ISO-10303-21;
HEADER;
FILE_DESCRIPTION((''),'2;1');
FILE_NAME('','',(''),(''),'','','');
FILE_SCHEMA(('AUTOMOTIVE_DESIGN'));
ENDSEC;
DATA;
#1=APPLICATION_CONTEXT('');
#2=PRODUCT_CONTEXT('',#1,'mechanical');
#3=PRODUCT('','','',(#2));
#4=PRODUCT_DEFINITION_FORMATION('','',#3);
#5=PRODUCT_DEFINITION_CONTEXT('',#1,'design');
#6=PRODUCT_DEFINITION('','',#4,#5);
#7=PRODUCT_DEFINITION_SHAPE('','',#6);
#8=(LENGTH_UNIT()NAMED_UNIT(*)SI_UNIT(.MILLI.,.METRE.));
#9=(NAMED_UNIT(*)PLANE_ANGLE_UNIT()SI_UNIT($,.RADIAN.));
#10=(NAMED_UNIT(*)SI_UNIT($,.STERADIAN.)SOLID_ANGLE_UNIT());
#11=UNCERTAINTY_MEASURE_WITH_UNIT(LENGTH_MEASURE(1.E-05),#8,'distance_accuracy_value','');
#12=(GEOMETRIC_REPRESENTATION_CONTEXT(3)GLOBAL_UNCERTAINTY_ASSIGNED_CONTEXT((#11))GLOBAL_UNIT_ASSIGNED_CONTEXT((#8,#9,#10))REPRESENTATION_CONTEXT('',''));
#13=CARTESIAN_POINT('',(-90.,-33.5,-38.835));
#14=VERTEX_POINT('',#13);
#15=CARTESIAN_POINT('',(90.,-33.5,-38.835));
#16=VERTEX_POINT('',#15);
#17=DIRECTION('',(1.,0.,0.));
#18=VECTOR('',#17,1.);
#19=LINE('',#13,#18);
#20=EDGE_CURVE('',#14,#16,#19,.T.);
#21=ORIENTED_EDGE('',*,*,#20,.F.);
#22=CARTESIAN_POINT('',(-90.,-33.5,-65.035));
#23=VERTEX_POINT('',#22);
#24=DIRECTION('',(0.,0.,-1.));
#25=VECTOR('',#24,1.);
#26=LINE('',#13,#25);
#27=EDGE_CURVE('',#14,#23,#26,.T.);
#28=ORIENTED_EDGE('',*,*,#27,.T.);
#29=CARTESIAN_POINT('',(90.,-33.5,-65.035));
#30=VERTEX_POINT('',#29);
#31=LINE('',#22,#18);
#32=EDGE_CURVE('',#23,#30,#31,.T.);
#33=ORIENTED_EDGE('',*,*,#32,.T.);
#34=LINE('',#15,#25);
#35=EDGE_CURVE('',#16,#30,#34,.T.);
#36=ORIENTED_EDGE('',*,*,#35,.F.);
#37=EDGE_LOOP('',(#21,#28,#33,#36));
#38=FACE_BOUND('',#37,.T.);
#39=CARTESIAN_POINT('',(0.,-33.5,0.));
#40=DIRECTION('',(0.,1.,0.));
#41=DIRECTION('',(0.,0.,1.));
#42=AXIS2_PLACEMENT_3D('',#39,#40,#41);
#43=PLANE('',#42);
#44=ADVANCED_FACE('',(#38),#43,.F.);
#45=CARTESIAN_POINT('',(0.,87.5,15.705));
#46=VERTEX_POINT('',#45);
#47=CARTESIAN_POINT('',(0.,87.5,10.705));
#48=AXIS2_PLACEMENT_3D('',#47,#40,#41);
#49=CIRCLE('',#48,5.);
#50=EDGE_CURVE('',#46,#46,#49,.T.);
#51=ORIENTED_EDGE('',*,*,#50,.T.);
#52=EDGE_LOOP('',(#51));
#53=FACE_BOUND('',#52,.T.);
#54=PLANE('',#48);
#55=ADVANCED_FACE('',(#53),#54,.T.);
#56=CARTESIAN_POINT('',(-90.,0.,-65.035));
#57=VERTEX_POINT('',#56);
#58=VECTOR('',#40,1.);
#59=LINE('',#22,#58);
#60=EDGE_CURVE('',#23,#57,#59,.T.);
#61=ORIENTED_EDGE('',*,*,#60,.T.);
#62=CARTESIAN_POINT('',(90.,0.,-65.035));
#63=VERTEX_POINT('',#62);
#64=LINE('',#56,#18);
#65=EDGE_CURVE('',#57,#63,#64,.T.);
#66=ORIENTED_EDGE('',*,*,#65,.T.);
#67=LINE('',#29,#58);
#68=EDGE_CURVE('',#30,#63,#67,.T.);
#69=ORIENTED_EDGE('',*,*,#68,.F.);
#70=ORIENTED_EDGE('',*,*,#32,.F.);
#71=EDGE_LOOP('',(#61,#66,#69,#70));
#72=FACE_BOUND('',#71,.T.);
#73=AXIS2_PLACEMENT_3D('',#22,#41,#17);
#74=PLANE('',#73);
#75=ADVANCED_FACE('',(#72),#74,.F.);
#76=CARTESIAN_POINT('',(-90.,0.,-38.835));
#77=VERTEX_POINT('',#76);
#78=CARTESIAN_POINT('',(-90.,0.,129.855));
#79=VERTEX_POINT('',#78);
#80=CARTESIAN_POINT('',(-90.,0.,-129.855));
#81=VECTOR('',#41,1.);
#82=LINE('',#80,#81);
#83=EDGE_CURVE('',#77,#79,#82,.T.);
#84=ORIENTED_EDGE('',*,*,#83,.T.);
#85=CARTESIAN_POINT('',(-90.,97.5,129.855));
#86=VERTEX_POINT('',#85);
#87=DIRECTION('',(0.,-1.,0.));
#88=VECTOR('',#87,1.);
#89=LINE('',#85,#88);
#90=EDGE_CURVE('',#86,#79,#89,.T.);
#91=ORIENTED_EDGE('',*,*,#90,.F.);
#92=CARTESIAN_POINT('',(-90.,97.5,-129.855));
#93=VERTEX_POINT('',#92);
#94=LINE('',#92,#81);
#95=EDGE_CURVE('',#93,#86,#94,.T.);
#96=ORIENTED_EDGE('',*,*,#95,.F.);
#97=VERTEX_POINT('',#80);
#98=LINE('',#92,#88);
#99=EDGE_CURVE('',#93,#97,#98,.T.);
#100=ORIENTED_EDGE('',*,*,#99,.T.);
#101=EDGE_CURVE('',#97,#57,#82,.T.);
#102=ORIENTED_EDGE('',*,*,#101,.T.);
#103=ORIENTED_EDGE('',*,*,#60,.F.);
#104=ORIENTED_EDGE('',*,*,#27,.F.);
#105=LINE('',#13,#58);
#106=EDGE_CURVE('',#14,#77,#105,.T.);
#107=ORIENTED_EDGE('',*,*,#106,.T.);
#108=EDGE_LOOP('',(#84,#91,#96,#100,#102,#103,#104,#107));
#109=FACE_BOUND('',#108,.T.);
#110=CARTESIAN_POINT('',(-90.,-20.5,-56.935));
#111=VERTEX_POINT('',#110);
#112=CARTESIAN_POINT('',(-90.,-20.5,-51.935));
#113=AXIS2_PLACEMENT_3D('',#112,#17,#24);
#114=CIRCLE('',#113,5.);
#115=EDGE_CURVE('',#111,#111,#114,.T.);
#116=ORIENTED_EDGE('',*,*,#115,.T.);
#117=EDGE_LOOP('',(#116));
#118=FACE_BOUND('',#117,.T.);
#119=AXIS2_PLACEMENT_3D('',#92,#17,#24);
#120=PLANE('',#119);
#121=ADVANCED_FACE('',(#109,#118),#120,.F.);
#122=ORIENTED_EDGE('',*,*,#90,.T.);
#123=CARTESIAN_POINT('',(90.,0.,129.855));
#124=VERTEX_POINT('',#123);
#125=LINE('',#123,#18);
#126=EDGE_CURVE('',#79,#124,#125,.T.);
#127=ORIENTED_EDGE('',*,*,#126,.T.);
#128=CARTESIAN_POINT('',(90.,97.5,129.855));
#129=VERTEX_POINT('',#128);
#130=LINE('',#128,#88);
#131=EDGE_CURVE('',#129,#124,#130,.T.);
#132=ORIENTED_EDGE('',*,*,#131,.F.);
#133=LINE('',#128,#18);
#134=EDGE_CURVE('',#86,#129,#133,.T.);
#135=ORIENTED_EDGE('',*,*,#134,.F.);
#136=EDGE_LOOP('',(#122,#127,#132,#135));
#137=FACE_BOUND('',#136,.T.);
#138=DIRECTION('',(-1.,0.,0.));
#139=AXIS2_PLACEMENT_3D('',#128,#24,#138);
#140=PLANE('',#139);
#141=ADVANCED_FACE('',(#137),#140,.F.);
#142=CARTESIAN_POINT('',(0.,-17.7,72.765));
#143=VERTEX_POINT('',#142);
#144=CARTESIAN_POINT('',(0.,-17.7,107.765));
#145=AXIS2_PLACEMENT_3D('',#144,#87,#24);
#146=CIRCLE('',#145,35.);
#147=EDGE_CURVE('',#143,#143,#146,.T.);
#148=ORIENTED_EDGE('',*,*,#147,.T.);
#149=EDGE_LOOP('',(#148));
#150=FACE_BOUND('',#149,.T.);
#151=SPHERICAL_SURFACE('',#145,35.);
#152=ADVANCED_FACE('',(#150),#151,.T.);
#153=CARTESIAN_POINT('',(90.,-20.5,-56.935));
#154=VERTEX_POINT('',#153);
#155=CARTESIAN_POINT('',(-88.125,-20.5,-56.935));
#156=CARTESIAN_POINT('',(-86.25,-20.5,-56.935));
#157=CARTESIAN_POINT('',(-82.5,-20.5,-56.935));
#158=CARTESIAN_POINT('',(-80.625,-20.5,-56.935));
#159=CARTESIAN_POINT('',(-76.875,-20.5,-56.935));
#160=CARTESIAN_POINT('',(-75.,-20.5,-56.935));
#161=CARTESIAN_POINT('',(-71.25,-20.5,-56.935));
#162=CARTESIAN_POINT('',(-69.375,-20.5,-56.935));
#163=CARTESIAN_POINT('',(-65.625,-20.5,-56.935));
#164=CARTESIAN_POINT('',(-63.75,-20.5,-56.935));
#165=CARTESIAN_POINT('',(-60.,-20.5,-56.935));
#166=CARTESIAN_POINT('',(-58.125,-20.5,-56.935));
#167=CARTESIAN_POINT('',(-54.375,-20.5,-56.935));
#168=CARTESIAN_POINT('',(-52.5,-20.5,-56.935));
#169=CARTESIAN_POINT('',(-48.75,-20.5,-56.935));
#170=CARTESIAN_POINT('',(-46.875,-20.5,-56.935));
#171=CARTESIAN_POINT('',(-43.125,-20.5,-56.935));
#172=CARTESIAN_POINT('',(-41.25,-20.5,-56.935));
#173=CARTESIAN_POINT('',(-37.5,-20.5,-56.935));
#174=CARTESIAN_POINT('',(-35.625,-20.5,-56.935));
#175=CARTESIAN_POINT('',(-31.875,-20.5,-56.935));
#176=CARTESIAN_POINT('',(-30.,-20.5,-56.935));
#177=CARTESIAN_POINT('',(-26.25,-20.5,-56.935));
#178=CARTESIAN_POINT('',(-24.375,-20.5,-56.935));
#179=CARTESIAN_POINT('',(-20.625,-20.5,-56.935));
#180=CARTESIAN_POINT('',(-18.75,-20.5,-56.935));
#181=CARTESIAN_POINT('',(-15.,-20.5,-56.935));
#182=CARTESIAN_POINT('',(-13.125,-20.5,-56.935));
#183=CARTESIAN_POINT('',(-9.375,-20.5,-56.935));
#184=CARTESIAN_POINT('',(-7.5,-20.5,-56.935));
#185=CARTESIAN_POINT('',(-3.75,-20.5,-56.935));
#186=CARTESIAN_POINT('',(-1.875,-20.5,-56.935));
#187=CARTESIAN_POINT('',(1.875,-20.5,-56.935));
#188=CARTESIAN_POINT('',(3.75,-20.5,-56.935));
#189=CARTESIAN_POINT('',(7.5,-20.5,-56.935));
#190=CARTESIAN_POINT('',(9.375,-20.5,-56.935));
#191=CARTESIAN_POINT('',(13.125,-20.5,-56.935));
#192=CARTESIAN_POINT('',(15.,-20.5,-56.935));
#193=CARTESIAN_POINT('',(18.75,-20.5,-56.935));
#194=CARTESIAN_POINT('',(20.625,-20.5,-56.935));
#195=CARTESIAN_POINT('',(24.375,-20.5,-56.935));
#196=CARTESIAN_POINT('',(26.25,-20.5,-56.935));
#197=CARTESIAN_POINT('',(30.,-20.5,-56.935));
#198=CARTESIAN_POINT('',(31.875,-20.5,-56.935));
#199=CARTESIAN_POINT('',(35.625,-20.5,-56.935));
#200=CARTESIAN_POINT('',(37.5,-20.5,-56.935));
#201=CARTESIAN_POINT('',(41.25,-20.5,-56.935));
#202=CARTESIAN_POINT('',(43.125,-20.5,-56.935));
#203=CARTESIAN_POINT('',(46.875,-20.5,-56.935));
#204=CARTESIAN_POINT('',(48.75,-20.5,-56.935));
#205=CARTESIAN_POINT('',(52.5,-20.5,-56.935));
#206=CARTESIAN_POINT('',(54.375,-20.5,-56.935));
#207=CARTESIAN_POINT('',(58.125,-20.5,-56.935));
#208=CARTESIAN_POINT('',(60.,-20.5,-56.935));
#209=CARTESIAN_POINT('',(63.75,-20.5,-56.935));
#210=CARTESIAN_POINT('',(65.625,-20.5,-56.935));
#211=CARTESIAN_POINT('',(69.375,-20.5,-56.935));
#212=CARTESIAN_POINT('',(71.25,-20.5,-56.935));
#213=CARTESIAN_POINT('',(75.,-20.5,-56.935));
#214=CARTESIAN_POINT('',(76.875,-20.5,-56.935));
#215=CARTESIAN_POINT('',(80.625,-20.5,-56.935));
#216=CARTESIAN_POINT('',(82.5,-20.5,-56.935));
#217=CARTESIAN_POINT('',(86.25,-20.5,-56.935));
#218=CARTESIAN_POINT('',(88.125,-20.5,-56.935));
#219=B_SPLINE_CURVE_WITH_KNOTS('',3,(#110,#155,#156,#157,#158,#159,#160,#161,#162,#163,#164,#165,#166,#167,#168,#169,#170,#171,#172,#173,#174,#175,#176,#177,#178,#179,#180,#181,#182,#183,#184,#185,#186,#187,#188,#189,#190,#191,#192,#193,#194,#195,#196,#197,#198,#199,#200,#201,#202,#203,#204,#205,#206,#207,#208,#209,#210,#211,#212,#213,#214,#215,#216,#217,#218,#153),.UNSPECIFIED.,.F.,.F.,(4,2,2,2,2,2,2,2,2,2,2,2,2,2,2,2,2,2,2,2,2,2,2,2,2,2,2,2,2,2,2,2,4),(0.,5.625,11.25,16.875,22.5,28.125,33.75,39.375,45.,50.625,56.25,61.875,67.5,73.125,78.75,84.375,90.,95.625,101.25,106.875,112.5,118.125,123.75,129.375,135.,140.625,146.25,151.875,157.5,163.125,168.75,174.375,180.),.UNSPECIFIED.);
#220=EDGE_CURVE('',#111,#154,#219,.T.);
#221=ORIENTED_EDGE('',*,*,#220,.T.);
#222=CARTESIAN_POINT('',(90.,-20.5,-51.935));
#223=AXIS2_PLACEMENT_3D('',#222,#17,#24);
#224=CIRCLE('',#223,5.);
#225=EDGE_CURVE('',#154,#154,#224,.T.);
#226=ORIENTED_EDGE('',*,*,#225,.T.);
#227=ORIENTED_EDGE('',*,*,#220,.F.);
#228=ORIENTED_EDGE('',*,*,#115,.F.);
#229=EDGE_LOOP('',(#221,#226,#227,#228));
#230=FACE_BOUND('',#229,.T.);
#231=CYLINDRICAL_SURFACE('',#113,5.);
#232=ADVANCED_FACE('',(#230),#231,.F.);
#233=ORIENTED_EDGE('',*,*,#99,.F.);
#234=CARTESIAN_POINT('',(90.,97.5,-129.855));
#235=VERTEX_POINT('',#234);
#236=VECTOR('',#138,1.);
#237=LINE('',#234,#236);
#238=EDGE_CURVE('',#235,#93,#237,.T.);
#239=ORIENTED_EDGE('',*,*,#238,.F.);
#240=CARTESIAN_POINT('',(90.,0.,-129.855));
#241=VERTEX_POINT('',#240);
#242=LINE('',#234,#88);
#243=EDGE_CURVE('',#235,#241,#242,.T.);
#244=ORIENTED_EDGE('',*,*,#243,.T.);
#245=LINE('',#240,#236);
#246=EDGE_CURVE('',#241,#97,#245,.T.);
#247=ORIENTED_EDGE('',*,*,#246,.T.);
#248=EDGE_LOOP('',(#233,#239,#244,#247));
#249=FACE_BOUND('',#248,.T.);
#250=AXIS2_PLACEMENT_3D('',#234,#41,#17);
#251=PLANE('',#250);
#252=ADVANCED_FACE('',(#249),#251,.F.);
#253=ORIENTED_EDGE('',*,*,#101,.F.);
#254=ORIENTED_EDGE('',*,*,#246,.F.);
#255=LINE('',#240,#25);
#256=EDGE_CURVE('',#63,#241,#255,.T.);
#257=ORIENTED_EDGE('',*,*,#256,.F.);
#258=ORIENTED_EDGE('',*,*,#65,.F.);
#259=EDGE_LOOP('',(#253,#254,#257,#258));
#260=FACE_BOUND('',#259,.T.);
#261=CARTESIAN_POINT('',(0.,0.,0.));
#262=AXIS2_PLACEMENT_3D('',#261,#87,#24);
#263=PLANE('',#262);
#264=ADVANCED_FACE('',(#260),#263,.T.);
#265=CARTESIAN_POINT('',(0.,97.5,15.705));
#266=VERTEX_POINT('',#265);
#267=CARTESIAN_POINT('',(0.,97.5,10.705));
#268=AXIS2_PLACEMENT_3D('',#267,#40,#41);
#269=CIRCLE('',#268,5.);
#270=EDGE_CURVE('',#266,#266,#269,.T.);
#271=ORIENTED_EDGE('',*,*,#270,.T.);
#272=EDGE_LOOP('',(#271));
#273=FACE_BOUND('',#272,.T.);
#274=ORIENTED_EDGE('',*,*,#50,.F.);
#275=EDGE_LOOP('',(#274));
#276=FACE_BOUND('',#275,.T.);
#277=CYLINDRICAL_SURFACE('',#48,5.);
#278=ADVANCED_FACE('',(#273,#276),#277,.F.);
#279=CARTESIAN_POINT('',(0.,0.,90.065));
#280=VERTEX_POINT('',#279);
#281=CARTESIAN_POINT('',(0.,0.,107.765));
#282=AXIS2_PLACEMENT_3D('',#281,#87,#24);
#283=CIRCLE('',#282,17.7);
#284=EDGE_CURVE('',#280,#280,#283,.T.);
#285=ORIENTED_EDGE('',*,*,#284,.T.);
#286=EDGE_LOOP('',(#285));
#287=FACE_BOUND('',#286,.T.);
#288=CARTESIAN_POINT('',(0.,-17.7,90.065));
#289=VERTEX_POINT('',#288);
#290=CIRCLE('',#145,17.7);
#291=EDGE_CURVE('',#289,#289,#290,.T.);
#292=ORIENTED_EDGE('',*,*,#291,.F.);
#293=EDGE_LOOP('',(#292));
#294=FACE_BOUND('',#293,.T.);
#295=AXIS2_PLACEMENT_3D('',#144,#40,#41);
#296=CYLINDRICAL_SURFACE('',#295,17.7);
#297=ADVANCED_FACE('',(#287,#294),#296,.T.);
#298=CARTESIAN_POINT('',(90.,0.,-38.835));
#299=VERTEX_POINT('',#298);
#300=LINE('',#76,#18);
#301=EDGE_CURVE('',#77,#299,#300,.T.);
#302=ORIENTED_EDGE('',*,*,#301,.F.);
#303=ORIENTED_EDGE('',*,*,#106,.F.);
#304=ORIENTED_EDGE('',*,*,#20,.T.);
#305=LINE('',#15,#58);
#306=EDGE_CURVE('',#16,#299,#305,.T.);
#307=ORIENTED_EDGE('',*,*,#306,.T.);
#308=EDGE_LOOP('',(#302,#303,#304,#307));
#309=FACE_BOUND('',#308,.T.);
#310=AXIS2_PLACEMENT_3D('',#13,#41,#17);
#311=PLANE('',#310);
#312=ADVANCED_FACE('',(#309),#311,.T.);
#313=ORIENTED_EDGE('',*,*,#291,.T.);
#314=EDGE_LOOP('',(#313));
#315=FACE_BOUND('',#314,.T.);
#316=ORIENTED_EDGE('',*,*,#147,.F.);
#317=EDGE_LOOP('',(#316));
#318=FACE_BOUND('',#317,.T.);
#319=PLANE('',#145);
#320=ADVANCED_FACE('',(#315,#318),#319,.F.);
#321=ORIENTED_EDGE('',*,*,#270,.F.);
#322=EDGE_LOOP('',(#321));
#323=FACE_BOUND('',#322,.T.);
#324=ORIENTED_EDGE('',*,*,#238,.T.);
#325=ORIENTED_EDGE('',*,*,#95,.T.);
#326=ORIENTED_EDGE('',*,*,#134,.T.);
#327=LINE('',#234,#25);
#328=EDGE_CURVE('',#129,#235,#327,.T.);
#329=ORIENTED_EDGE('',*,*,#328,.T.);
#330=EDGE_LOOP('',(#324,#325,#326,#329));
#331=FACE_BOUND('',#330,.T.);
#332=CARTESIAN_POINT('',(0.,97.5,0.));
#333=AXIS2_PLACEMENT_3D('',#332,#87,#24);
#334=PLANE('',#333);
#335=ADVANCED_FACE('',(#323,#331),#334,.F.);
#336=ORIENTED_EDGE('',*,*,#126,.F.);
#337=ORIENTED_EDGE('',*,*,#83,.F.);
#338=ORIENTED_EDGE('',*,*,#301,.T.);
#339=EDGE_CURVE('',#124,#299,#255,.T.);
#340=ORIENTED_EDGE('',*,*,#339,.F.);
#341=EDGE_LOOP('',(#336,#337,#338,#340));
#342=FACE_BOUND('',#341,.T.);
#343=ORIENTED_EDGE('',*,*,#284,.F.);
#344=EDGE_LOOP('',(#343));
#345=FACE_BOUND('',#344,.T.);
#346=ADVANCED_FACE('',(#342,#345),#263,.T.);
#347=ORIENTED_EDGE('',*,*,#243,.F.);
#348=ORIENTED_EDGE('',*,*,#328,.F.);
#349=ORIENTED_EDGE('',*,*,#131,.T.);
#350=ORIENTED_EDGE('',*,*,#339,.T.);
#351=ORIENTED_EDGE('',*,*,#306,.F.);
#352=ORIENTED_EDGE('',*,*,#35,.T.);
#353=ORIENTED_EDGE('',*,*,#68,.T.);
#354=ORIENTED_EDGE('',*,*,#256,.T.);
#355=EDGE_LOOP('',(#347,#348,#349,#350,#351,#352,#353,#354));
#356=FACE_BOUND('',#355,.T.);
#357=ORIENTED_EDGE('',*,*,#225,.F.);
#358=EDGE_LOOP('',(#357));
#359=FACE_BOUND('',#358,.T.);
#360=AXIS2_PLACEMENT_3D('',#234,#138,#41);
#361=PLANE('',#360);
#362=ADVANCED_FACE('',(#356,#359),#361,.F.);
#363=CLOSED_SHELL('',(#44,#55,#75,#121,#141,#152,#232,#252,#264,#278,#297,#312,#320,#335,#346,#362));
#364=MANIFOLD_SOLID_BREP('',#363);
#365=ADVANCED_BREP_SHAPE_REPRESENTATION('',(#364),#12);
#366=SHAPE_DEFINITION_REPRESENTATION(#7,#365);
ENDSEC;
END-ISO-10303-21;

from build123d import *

# Parameters (mm, degrees)
SKETCH2_W           = 180
SKETCH2_H           = 259.71
BOSS_EXTRUDE1_DEPTH = 97.5
SKETCH4_R           = 17.7
BOSS_EXTRUDE2_DEPTH = 17.7
SKETCH5_R           = 35
BOSS_EXTRUDE3_DEPTH = 35
FILLET2_R           = 35
SKETCH8_W           = 180
SKETCH8_H           = 26.2
BOSS_EXTRUDE4_DEPTH = 33.5
SKETCH9_R           = 5
CUT_EXTRUDE1_DEPTH  = 250.575830668
SKETCH10_R          = 5
CUT_EXTRUDE2_DEPTH  = 10


with BuildPart() as part:
    # Sketch2 → Boss-Extrude1 (new body)
    with BuildSketch(Plane(origin=(0, 0, 0), x_dir=(1, 0, 0), z_dir=(0, 1, 0))):
        Rectangle(SKETCH2_W, SKETCH2_H)
    extrude(amount=BOSS_EXTRUDE1_DEPTH)

    # Sketch4 → Boss-Extrude2 (add)
    with BuildSketch(Plane.XZ):
        with Locations(Location((0, 107.765, 0), (0, 0, 270))):
            Circle(SKETCH4_R)
    extrude(amount=BOSS_EXTRUDE2_DEPTH)

    # Sketch5 → Boss-Extrude3 (add)
    with BuildSketch(Plane.XZ.offset(17.7)):
        with Locations(Location((0, 107.765, 0), (0, 0, 270))):
            Circle(SKETCH5_R)
    extrude(amount=BOSS_EXTRUDE3_DEPTH)

    # Fillet2
    fillet2_edges = [part.edges().sort_by_distance(p)[0] for p in [
        (0, -52.7, 142.765),
    ]]
    fillet(fillet2_edges, radius=FILLET2_R - 0.0001)  # a hair under: the kernel refuses the full size

    # Sketch8 → Boss-Extrude4 (add)
    with BuildSketch(Plane.XZ):
        with Locations((0, -51.935)):
            Rectangle(SKETCH8_W, SKETCH8_H)
    extrude(amount=BOSS_EXTRUDE4_DEPTH)

    # Sketch9 → Cut-Extrude1 (cut, through all)
    with BuildSketch(Plane(origin=(90, 0, 0), x_dir=(0, 0, -1), z_dir=(1, 0, 0))):
        with Locations((51.935, -20.5)):
            Circle(SKETCH9_R)
    extrude(amount=-CUT_EXTRUDE1_DEPTH, mode=Mode.SUBTRACT)

    # Sketch10 → Cut-Extrude2 (cut)
    with BuildSketch(Plane(origin=(0, 97.5, 0), x_dir=(1, 0, 0), z_dir=(0, 1, 0))):
        with Locations(Location((0, -10.705, 0), (0, 0, 270))):
            Circle(SKETCH10_R)
    extrude(amount=-CUT_EXTRUDE2_DEPTH, mode=Mode.SUBTRACT)


solid = part.part
